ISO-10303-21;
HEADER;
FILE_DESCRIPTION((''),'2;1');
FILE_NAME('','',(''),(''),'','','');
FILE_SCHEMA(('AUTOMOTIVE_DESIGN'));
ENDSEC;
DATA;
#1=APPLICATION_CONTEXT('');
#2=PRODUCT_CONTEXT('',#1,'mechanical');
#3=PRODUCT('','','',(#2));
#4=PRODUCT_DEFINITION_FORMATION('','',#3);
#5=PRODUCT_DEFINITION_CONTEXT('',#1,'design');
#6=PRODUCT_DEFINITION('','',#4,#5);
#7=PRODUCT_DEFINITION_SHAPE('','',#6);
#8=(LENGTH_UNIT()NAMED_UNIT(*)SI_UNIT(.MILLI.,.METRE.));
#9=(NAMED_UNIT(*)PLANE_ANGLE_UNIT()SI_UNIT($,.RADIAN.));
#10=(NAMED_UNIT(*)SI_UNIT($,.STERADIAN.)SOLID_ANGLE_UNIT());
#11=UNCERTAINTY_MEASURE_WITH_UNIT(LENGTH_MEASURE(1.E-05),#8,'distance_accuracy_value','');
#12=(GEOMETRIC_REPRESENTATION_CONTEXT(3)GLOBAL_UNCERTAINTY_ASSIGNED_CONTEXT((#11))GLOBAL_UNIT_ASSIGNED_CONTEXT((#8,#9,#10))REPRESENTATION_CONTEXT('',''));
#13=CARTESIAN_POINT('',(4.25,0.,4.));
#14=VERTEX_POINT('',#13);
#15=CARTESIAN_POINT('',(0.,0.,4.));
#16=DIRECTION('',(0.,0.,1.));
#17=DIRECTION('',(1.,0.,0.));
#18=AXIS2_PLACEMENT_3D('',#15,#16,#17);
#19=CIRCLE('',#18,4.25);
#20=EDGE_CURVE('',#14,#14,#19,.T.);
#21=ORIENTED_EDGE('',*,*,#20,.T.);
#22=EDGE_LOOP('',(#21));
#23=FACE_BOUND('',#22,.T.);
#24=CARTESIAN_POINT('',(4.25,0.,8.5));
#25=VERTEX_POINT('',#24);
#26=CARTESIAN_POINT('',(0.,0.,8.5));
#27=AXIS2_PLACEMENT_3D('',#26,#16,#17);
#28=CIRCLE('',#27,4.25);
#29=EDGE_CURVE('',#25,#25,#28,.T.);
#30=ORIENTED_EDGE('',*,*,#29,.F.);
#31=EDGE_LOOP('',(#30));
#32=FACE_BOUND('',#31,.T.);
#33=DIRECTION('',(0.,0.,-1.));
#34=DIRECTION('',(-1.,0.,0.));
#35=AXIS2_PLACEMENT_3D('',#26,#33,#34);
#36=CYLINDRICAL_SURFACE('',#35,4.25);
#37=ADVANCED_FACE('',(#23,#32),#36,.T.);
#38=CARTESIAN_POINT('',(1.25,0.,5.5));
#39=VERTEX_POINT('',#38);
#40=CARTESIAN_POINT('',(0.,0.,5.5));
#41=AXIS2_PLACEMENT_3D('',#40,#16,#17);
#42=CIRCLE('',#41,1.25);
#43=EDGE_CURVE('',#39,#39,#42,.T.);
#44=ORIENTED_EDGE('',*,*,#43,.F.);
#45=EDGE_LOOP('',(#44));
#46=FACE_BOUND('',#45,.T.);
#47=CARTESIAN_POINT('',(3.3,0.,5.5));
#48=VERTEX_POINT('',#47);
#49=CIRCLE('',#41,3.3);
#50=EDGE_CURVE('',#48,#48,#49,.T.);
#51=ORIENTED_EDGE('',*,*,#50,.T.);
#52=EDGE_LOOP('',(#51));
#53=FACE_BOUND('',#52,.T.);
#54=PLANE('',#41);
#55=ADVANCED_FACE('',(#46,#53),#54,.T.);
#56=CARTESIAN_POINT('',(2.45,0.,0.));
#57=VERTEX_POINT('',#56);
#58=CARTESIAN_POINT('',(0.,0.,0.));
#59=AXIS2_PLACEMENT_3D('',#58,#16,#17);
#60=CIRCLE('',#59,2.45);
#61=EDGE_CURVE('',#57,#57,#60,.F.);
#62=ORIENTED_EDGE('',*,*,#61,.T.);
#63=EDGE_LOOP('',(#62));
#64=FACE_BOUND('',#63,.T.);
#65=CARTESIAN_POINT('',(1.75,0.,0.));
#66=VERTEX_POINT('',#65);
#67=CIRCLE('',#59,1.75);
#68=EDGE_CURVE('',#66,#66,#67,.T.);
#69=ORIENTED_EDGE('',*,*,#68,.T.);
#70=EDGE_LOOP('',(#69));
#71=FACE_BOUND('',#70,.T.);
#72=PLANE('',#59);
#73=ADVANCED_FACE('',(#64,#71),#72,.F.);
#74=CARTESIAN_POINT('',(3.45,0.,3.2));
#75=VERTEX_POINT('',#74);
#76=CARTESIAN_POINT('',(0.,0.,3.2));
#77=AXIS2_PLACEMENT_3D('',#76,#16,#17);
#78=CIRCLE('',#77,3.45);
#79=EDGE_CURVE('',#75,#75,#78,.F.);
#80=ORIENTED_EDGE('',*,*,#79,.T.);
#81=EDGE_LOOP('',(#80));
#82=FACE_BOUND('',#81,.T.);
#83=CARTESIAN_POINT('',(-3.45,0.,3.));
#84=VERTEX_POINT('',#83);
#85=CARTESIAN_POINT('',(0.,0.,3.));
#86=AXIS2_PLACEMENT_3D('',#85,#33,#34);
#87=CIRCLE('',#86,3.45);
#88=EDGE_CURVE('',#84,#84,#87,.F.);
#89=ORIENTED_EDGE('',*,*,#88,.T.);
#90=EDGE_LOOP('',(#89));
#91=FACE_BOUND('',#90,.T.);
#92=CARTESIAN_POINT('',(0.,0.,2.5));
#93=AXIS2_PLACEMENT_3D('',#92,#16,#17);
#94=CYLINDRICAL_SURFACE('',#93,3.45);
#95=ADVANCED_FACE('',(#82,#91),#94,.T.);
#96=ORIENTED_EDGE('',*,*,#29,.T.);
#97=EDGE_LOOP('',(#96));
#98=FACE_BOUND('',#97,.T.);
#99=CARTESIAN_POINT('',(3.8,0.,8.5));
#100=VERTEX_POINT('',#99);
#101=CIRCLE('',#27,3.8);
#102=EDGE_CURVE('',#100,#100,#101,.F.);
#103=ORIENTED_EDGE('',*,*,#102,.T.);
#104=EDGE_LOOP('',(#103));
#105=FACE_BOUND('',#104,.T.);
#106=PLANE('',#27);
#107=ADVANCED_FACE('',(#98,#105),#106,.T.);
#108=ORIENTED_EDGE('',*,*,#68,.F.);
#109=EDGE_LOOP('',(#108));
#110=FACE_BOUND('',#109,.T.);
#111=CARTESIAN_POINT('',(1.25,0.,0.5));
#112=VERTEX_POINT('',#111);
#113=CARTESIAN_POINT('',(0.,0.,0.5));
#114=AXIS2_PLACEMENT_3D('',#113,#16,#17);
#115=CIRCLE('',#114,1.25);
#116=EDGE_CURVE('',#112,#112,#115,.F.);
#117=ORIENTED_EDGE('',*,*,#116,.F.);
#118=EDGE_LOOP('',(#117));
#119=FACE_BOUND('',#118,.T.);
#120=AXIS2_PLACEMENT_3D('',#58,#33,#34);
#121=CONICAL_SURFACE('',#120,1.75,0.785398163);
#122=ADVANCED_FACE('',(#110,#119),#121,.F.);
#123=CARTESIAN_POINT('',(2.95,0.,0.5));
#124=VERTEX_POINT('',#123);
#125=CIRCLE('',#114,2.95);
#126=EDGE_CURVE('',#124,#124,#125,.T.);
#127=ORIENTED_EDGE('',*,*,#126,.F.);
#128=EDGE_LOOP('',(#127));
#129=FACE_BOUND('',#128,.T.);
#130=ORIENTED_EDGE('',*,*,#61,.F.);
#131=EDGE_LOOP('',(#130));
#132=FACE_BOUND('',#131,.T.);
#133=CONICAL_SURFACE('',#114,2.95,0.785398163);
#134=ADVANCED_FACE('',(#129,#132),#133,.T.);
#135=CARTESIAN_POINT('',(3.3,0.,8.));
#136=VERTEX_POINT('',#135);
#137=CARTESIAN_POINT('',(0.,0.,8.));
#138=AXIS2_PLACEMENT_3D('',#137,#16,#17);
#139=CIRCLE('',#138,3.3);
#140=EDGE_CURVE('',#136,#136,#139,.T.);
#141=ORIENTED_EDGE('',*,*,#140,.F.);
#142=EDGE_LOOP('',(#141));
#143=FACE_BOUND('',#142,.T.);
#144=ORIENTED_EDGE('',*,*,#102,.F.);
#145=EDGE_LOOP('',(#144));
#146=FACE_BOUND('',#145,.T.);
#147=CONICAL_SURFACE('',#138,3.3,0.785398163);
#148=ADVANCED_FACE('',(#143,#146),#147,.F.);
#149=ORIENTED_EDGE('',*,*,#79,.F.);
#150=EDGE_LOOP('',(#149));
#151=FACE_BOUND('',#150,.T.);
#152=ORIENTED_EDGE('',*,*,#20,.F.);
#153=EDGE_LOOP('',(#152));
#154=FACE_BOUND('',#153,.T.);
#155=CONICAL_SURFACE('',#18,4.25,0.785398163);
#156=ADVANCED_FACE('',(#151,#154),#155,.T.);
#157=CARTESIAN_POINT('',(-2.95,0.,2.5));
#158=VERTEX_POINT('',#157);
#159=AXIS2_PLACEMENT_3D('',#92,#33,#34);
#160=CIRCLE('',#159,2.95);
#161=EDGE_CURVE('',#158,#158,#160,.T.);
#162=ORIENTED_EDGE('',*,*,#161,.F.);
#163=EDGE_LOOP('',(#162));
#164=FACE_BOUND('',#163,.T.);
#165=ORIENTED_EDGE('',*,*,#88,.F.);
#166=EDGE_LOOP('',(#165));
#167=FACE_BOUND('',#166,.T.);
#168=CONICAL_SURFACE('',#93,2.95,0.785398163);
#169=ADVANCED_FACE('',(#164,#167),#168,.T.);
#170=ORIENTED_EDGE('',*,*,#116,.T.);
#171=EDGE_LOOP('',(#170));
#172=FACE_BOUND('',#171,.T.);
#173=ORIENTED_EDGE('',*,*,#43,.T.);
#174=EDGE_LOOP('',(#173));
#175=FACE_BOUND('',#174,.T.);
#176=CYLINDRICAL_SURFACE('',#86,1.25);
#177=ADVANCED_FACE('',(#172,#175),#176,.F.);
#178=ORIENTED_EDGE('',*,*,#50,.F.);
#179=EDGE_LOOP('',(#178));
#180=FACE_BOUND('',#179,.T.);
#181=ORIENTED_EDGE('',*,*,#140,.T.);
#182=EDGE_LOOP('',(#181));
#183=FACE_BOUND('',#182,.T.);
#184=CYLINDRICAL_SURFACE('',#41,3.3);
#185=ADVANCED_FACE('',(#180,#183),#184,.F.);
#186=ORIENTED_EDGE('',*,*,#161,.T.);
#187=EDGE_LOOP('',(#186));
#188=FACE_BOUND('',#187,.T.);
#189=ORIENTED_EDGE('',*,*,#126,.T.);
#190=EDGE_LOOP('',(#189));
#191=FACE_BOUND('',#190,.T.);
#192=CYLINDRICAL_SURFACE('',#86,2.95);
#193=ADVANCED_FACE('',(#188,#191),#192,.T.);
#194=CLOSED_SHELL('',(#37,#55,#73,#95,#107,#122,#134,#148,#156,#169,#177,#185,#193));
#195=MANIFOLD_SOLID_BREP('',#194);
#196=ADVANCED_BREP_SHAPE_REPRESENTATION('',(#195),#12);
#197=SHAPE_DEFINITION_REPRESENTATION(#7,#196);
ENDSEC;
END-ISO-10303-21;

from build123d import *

# Parameters (mm, degrees)
SKETCH1_R           = 2.95
SKETCH1_R_2         = 1.25
BOSS_EXTRUDE1_DEPTH = 3
SKETCH2_R           = 4.25
SKETCH2_R_2         = 1.25
BOSS_EXTRUDE2_DEPTH = 5.5
SKETCH3_R           = 3.3
CUT_EXTRUDE1_DEPTH  = 3
CHAMFER1_SIZE       = 0.5
CHAMFER2_SIZE       = 0.5
BOSS_EXTRUDE3_START = 0.5
SKETCH4_R           = 3.45
SKETCH4_R_2         = 1.25
BOSS_EXTRUDE3_DEPTH = 0.5
CHAMFER3_SIZE       = 1
CHAMFER4_SIZE       = 0.5
CHAMFER6_SIZE       = 0.5


# Some blends are built 0.0001 mm under size
with BuildPart() as part:
    # Sketch1 → Boss-Extrude1 (new body)
    with BuildSketch(Plane.XY):
        Circle(SKETCH1_R)
        Circle(SKETCH1_R_2, mode=Mode.SUBTRACT)
    extrude(amount=BOSS_EXTRUDE1_DEPTH)

    # Sketch2 → Boss-Extrude2 (add)
    with BuildSketch(Plane.XY.offset(3)):
        Circle(SKETCH2_R)
        Circle(SKETCH2_R_2, mode=Mode.SUBTRACT)
    extrude(amount=BOSS_EXTRUDE2_DEPTH)

    # Sketch3 → Cut-Extrude1 (cut)
    with BuildSketch(Plane.XY.offset(8.5)):
        Circle(SKETCH3_R)
    extrude(amount=-CUT_EXTRUDE1_DEPTH, mode=Mode.SUBTRACT)

    # Chamfer1
    chamfer1_edges = [part.edges().sort_by_distance(p)[0] for p in [
        (-3.3, 0, 8.5),
    ]]
    chamfer(chamfer1_edges, length=CHAMFER1_SIZE)

    # Chamfer2
    chamfer2_edges = [part.edges().sort_by_distance(p)[0] for p in [
        (-2.95, 0, 0),
    ]]
    chamfer(chamfer2_edges, length=CHAMFER2_SIZE)

    # Sketch4 → Boss-Extrude3 (add)
    with BuildSketch(Plane(origin=(0, 0, 3), x_dir=(-1, 0, 0), z_dir=(0, 0, -1)).offset(BOSS_EXTRUDE3_START)):
        with Locations(Location((0, 0, 0), (0, 0, 180))):
            Circle(SKETCH4_R)
        with Locations(Location((0, 0, 0), (0, 0, 180))):
            Circle(SKETCH4_R_2, mode=Mode.SUBTRACT)
    extrude(amount=-BOSS_EXTRUDE3_DEPTH)

    # Chamfer3
    # the kernel refuses this chamfer: 1 mm, written as the material it takes off along each edge
    with BuildSketch(Plane(origin=(0, 0, 3), x_dir=(1, 0, 0), z_dir=(0, -1, 0))) as chamfer3_piece_1_section:
        Polygon((4.25 - CHAMFER3_SIZE, 0), (4.25, CHAMFER3_SIZE), (4.25, 0), align=None)
    chamfer3_piece_1 = revolve(axis=Axis((0, 0, 3), (0, 0, 1)), mode=Mode.PRIVATE)
    chamfer3_piece_1 = chamfer3_piece_1 - Plane(origin=(0, 0, 3.597538835), x_dir=(1, 0, 0), z_dir=(0, 0, -1)) * Cylinder(3.45, 17, mode=Mode.PRIVATE)
    add(chamfer3_piece_1, mode=Mode.SUBTRACT)

    # Chamfer4
    chamfer4_edges = [part.edges().sort_by_distance(p)[0] for p in [
        (-1.25, 0, 0),
    ]]
    chamfer(chamfer4_edges, length=CHAMFER4_SIZE)

    # Chamfer6
    chamfer6_edges = [part.edges().sort_by_distance(p)[0] for p in [
        (-3.45, 0, 2.5),
    ]]
    chamfer(chamfer6_edges, length=CHAMFER6_SIZE - 0.0001)  # a hair under: the kernel refuses the full size


solid = part.part
